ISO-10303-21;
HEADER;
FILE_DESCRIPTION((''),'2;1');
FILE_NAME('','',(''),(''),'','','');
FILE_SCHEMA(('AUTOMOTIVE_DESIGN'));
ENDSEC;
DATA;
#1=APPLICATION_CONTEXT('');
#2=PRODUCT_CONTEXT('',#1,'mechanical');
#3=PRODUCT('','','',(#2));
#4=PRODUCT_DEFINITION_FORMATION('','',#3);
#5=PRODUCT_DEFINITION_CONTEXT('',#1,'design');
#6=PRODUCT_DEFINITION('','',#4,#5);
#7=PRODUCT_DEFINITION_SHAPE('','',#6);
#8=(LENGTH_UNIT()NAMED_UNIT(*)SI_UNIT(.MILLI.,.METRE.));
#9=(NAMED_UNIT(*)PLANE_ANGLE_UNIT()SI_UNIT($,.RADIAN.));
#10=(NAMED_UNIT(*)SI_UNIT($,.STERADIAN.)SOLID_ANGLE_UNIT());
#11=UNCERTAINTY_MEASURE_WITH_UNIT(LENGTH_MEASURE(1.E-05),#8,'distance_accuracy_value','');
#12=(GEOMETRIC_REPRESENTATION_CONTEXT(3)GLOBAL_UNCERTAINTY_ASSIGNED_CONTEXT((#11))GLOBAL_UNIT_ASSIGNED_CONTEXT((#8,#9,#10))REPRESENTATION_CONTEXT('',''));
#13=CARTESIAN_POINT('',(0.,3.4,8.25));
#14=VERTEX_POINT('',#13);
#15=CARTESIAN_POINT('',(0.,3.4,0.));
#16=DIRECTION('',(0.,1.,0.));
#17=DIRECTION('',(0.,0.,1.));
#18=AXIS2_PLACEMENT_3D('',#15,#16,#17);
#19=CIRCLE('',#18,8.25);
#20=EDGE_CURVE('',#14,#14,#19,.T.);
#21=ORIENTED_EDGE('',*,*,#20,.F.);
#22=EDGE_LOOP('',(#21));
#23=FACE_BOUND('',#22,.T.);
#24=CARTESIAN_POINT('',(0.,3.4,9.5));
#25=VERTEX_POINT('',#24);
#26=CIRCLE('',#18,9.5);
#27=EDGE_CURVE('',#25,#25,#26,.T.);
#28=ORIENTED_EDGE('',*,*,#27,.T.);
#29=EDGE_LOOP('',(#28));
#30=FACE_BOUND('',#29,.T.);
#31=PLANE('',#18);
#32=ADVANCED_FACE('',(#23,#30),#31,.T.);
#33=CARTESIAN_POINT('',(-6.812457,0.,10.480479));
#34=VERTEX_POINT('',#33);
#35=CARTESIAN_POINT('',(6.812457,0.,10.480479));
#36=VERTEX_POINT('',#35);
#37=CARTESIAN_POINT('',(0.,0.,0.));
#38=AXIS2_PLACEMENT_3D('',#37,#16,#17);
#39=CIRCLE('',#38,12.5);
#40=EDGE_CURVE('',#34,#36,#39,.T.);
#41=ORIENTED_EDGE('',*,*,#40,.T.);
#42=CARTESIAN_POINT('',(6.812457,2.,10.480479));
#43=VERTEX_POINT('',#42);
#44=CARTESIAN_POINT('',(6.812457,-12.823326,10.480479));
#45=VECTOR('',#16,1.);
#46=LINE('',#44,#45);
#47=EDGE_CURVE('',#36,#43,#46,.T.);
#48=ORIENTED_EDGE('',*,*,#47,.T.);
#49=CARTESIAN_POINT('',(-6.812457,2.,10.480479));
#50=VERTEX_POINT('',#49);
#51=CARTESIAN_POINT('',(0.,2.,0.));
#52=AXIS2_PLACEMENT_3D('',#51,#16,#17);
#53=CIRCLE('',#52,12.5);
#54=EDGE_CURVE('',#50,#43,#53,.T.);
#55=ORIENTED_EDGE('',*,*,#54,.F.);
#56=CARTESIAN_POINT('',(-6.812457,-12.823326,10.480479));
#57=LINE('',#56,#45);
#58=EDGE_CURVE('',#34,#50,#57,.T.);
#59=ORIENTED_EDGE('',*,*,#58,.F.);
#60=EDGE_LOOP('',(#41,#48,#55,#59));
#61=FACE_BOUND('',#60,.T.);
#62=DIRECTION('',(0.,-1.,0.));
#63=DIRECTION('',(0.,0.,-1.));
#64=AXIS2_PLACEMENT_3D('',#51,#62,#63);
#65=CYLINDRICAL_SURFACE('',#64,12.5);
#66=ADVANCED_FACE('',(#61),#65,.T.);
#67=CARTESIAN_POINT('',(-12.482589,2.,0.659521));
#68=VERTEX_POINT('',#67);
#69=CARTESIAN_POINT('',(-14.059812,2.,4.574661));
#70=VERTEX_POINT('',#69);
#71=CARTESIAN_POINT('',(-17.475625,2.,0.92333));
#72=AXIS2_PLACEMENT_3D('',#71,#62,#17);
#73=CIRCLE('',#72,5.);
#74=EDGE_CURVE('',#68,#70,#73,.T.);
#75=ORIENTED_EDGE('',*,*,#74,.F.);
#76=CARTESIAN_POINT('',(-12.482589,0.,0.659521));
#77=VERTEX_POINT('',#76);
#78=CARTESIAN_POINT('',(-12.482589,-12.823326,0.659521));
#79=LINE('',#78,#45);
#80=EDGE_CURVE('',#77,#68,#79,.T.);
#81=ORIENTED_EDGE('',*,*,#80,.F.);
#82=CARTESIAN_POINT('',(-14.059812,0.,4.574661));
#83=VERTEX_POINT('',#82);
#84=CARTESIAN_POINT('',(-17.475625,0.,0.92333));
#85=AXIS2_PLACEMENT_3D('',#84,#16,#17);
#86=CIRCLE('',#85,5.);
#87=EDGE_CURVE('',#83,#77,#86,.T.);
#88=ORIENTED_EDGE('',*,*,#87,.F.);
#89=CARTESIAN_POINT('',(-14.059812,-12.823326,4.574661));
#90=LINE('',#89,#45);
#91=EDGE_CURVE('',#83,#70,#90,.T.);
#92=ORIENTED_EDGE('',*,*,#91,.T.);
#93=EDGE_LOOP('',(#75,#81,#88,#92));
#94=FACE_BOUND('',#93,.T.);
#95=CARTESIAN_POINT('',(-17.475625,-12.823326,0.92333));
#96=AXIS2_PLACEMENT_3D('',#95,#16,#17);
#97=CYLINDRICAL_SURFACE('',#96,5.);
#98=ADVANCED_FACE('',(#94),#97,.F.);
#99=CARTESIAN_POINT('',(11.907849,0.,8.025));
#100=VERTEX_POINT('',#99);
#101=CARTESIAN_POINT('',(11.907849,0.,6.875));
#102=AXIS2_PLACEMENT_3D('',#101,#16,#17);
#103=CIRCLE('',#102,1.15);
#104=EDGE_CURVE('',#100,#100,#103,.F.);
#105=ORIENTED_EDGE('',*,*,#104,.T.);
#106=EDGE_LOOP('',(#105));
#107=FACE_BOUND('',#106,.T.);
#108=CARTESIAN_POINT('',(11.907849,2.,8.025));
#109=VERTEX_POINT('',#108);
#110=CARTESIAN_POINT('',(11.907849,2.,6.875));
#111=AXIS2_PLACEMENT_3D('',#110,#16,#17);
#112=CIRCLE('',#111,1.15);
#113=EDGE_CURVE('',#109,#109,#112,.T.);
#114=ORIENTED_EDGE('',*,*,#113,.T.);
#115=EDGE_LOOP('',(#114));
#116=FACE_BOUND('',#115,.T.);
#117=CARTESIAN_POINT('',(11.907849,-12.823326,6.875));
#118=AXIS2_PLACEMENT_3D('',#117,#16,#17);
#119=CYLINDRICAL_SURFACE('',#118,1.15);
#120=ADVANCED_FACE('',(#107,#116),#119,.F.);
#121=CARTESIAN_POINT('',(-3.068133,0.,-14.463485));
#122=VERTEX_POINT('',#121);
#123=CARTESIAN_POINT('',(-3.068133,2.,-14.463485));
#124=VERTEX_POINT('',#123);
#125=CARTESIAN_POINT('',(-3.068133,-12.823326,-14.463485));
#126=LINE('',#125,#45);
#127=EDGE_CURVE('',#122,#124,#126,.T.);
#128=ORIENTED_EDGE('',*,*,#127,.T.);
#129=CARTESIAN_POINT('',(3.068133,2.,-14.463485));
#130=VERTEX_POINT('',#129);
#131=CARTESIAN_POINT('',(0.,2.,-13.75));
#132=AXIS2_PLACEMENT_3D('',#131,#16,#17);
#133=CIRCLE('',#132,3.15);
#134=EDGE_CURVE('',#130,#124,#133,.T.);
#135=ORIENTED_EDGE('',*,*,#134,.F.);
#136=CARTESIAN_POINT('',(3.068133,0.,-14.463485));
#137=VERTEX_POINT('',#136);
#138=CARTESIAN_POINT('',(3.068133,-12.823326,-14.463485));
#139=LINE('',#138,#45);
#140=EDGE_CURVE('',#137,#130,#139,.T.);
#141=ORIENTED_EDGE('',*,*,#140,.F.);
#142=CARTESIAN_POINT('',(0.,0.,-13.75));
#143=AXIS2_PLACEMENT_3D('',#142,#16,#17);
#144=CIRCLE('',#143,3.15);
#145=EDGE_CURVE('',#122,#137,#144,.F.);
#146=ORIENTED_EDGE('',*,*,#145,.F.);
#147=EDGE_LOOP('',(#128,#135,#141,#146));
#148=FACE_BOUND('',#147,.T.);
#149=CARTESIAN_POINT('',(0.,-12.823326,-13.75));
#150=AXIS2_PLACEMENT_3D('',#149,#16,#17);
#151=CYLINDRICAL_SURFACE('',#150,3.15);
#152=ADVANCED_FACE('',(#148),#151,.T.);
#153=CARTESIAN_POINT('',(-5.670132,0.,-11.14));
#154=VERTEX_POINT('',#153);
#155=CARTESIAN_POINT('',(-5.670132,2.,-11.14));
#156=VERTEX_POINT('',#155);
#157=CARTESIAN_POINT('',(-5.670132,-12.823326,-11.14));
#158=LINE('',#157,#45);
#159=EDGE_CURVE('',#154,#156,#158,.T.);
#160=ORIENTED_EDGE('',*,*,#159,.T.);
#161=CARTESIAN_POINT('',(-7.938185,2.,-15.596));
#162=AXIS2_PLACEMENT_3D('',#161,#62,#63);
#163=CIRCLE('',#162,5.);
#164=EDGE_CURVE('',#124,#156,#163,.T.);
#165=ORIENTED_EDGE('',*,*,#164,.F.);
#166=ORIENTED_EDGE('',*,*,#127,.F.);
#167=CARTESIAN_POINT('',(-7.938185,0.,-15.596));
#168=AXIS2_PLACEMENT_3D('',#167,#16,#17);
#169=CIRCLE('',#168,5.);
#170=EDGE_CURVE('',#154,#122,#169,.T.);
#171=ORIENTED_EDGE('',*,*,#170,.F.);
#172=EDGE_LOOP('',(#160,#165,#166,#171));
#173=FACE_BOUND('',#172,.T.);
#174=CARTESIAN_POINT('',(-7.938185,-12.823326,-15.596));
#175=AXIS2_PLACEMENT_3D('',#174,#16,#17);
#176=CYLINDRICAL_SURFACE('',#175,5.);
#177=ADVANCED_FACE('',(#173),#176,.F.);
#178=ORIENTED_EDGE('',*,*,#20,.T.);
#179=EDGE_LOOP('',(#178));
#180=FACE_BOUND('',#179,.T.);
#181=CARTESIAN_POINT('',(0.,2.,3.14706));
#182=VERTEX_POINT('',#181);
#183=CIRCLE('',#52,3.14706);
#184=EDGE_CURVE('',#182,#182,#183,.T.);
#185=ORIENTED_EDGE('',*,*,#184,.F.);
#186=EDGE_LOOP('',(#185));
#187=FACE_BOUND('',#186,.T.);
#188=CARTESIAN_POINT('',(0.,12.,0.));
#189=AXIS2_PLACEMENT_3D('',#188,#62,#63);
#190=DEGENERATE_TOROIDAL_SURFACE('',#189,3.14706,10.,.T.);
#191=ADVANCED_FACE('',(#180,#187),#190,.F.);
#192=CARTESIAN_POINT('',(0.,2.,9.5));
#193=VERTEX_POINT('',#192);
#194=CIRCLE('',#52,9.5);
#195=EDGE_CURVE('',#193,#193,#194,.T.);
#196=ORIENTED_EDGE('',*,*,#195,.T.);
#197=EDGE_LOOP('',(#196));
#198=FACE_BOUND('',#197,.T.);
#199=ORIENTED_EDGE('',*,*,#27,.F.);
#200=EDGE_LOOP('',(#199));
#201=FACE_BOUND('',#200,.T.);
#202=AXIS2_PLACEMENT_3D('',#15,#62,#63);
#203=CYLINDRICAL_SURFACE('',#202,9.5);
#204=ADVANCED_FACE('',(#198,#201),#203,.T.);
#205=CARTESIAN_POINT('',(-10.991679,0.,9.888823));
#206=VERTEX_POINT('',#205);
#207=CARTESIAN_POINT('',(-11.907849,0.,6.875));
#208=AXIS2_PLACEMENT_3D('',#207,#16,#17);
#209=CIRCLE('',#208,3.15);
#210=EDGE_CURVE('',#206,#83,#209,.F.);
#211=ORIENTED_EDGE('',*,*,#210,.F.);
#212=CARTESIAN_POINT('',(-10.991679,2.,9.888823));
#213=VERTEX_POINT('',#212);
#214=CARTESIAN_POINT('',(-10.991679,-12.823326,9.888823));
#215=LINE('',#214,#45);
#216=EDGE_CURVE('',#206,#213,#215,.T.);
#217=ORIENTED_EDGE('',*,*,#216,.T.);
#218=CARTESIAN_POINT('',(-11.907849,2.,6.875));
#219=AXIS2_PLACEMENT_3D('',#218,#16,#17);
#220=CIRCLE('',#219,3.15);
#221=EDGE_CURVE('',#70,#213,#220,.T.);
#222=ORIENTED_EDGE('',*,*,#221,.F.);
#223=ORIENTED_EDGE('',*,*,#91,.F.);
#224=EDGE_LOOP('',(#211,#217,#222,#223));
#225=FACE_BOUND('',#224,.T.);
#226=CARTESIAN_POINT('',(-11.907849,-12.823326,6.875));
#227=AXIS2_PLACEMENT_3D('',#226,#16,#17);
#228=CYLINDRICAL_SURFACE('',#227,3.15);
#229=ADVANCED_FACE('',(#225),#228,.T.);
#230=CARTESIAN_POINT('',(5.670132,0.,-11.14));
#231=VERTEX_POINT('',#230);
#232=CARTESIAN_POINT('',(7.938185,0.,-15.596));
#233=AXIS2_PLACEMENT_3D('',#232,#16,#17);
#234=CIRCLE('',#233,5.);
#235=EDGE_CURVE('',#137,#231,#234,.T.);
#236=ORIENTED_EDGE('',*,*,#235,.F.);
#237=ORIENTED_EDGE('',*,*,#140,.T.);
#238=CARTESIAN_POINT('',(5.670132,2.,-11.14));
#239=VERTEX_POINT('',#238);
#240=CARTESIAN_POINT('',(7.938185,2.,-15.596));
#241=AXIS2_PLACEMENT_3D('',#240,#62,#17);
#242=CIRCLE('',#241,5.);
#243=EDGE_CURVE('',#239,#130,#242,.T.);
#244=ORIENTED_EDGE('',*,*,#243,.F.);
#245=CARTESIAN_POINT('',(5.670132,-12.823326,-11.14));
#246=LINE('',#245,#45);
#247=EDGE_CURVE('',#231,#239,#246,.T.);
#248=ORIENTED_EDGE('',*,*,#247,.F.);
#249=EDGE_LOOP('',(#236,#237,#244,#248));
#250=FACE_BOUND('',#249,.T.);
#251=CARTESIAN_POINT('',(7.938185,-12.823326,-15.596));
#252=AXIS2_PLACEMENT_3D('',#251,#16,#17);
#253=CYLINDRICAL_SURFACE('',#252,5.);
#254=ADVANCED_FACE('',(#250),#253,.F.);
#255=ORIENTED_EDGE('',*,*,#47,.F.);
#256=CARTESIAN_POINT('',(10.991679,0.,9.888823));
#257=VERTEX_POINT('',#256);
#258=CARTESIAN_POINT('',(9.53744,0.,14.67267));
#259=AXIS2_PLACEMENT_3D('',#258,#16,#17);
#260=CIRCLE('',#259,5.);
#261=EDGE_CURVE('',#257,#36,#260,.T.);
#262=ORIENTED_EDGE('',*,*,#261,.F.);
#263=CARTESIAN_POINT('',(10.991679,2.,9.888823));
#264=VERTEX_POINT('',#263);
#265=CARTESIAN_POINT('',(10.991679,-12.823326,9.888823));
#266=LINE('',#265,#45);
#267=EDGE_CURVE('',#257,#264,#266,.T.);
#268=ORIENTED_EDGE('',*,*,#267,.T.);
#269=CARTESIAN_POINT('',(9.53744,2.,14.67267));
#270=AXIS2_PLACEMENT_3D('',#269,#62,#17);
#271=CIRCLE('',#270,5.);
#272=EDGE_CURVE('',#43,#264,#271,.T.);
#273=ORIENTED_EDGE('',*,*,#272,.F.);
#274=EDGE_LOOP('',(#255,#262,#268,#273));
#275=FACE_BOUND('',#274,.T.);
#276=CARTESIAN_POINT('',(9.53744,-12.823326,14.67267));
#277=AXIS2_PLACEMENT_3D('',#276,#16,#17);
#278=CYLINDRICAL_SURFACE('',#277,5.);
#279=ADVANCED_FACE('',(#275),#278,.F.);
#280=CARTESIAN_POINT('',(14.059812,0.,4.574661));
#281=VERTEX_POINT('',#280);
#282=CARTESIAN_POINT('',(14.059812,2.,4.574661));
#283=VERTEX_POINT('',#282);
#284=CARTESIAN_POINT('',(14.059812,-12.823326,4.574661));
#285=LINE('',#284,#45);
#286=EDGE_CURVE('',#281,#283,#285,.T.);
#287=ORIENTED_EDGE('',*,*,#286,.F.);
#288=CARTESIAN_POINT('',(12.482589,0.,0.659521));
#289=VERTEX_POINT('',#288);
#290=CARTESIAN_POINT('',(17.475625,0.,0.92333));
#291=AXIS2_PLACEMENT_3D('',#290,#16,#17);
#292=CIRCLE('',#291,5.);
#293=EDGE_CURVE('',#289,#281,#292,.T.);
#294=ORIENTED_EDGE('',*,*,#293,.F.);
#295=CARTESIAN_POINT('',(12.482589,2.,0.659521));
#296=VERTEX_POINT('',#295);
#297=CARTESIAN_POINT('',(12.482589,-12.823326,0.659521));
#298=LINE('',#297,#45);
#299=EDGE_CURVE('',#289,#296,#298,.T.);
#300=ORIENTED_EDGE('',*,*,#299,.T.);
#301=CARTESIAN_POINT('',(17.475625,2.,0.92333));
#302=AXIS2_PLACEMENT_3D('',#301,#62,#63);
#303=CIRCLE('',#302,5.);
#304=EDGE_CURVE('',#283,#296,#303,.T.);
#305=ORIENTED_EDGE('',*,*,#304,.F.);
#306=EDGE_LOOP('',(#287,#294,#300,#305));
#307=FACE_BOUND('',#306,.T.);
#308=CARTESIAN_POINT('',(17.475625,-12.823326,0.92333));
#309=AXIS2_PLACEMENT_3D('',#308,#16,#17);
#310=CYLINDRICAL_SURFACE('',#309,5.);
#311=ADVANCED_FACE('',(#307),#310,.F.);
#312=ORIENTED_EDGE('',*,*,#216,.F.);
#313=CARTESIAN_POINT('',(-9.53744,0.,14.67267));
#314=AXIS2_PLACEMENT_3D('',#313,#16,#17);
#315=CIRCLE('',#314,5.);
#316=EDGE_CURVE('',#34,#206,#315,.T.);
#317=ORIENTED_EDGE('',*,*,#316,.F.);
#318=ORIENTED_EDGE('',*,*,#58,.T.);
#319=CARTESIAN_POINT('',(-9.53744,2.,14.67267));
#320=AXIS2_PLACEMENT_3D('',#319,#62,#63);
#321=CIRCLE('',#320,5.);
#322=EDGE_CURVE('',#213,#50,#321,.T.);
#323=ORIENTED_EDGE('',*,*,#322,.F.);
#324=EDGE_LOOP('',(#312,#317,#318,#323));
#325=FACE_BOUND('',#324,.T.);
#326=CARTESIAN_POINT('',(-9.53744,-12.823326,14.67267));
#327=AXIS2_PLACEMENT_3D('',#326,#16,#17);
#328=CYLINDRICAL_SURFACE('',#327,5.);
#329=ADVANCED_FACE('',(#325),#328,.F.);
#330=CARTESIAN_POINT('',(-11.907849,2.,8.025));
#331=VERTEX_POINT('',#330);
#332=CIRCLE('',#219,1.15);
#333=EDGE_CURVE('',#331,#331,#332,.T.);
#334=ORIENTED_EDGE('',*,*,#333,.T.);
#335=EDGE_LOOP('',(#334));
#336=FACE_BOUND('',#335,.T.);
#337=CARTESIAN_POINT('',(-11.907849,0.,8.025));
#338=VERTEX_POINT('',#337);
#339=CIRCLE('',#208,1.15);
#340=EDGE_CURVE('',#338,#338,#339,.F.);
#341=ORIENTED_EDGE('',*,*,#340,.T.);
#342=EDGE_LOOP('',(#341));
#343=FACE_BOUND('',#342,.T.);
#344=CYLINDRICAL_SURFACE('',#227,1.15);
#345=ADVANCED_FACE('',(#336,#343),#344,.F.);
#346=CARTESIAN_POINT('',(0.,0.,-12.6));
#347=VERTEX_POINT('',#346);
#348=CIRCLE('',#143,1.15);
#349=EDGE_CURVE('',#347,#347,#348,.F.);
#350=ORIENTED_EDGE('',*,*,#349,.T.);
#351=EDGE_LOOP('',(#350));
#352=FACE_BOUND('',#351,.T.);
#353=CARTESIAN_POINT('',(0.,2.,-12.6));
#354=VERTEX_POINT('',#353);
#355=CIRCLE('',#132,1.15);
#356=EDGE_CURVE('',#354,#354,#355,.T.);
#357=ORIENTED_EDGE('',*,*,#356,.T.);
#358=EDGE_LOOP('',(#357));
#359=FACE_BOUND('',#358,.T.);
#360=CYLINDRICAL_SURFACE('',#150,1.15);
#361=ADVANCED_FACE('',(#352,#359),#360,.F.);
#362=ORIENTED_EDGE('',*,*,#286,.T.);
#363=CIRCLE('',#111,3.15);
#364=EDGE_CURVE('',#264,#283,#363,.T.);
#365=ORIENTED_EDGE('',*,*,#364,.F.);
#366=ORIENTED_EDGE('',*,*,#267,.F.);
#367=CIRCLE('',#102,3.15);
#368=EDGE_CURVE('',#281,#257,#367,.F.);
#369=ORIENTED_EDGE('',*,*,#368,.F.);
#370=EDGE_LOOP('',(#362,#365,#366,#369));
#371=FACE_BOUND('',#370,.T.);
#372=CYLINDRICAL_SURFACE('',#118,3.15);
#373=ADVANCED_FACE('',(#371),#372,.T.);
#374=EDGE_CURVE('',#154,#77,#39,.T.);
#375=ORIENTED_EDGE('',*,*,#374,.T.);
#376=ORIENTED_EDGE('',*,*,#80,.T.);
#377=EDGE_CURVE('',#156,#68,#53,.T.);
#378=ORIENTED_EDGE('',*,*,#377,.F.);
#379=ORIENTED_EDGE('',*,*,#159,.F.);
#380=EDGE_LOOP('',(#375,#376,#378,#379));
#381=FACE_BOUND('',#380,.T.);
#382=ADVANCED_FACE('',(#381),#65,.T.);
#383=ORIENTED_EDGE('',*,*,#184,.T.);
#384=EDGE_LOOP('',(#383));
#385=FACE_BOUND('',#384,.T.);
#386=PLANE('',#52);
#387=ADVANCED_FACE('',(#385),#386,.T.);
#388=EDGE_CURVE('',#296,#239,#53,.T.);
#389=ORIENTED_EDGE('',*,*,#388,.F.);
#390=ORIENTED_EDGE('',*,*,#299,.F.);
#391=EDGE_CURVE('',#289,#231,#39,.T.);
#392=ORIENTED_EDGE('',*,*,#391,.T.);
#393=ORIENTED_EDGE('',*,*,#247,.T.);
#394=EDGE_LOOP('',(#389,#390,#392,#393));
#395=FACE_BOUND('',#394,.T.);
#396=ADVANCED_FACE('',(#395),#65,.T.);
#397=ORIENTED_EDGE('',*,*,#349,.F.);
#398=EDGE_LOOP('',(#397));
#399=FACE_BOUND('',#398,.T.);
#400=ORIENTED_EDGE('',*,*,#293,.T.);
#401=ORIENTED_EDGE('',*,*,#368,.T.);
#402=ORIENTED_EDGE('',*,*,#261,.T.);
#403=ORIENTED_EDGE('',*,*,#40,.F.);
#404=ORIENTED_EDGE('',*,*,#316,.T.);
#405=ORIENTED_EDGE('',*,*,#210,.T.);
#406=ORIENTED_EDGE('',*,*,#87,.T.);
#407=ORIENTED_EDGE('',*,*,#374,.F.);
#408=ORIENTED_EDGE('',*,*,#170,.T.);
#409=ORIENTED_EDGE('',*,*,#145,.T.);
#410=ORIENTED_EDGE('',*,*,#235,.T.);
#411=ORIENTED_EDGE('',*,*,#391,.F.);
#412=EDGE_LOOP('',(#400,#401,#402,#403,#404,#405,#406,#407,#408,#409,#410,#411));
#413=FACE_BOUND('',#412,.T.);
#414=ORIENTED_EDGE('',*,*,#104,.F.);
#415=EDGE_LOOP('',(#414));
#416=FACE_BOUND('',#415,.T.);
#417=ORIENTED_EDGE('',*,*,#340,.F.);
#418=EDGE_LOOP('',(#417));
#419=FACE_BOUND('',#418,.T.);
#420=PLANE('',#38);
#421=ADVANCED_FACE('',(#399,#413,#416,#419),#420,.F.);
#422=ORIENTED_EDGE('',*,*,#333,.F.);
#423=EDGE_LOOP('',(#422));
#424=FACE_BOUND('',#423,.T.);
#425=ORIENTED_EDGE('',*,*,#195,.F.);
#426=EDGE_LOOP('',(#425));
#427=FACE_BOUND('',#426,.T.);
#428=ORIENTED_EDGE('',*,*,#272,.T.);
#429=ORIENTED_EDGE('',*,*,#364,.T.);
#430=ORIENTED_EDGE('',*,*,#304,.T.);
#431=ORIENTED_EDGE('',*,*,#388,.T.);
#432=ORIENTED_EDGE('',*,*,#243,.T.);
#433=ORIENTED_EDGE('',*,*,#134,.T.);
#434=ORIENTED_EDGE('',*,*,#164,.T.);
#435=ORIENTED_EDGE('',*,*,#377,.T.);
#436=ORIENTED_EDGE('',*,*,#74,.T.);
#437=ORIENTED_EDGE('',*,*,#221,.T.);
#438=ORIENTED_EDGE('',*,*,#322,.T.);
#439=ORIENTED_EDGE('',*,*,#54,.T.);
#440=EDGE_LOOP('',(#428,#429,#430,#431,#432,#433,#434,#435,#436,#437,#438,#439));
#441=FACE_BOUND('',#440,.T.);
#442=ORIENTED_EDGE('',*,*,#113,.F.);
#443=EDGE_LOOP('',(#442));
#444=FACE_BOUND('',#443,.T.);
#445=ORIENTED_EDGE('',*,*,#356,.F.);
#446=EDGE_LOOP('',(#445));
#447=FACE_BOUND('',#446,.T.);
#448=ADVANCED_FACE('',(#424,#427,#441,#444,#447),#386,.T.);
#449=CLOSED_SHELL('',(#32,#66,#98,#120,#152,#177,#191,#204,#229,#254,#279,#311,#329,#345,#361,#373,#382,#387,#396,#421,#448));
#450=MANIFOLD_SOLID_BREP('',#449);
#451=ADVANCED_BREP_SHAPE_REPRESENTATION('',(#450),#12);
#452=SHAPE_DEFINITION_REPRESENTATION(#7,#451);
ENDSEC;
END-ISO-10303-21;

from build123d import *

# Parameters (mm, degrees)
SKETCH_1_R      = 12.5
EXTRUDE_1_DEPTH = 2
SKETCH_2_R      = 9.5
SKETCH_2_R_2    = 8.25
EXTRUDE_2_DEPTH = 1.4
FILLET_1_R      = 10
EXTRUDE_START   = -2
SKETCH_3_R      = 1.15
EXTRUDE_3_DEPTH = 2


with BuildPart() as part:
    # Эскиз1 → Бобышка-Вытянуть1 (new body)
    with BuildSketch(Plane(origin=(0, 0, 0), x_dir=(1, 0, 0), z_dir=(0, 1, 0))):
        with Locations(Location((0, 0, 0), (0, 0, 270))):
            Circle(SKETCH_1_R)
    extrude(amount=EXTRUDE_1_DEPTH)

    # Эскиз2 → Бобышка-Вытянуть2 (add)
    with BuildSketch(Plane(origin=(0, 2, 0), x_dir=(1, 0, 0), z_dir=(0, 1, 0))):
        with Locations(Location((0, 0, 0), (0, 0, 270))):
            Circle(SKETCH_2_R)
        with Locations(Location((0, 0, 0), (0, 0, 270))):
            Circle(SKETCH_2_R_2, mode=Mode.SUBTRACT)
    extrude(amount=EXTRUDE_2_DEPTH)

    # Скругление1
    # the kernel refuses this fillet: 10 mm, written as the material it adds along each edge
    with BuildSketch(Plane(origin=(0, 2, 0), x_dir=(0, 0, 1), z_dir=(-1, 0, 0))) as fillet_1_piece_1:
        with BuildLine():
            CenterArc((3.147059671, 10), FILLET_1_R, 270, 30.683417109)
            Line((3.147059671, 0), (3.147059671, -0.2))
            Line((3.147059671, -0.2), (8.25, -0.2))
            Line((8.25, -0.2), (8.45, 0))
            ThreePointArc((8.45, 0), (8.45, 0.7), (8.352058807, 1.228))
            Line((8.352058807, 1.228), (8.25, 1.4))
        make_face()
    revolve(axis=Axis((0, 2, 0), (0, 1, 0)))

    # Эскиз3 → Бобышка-Вытянуть3 (add)
    # profile 1 of 3: a face of its own
    with BuildSketch(Plane(origin=(0, 2, 0), x_dir=(1, 0, 0), z_dir=(0, 1, 0)).offset(EXTRUDE_START)):
        with BuildLine():
            ThreePointArc((5.670132274, 11.14), (0, 12.5), (-5.670132274, 11.14))
            ThreePointArc((-5.670132274, 11.14), (-4.001241708, 12.51371577), (-3.068132924, 14.463484663))
            ThreePointArc((-3.068132924, 14.463484663), (0, 16.9), (3.068132924, 14.463484663))
            ThreePointArc((3.068132924, 14.463484663), (4.001241708, 12.51371577), (5.670132274, 11.14))
        make_face()
        with Locations(Location((0, 13.75, 0), (0, 0, 270))):
            Circle(SKETCH_3_R, mode=Mode.SUBTRACT)
    # profile 2 of 3: a face of its own
    with BuildSketch(Plane(origin=(0, 2, 0), x_dir=(1, 0, 0), z_dir=(0, 1, 0)).offset(EXTRUDE_START)):
        with BuildLine():
            ThreePointArc((10.991678683, -9.888823385), (14.635829324, -8.45), (14.059811607, -4.574661277))
            ThreePointArc((14.059811607, -4.574661277), (12.837816607, -2.791680919), (12.482589135, -0.659521408))
            ThreePointArc((12.482589135, -0.659521408), (10.825317547, -6.25), (6.812456861, -10.480478592))
            ThreePointArc((6.812456861, -10.480478592), (8.836574899, -9.722034851), (10.991678683, -9.888823385))
        make_face()
        with Locations(Location((11.907849302, -6.875, 0), (0, 0, 270))):
            Circle(SKETCH_3_R, mode=Mode.SUBTRACT)
    # profile 3 of 3: a face of its own
    with BuildSketch(Plane(origin=(0, 2, 0), x_dir=(1, 0, 0), z_dir=(0, 1, 0)).offset(EXTRUDE_START)):
        with BuildLine():
            ThreePointArc((-14.059811607, -4.574661277), (-14.635829324, -8.45), (-10.991678683, -9.888823385))
            ThreePointArc((-10.991678683, -9.888823385), (-8.836574899, -9.722034851), (-6.812456861, -10.480478592))
            ThreePointArc((-6.812456861, -10.480478592), (-10.825317547, -6.25), (-12.482589135, -0.659521408))
            ThreePointArc((-12.482589135, -0.659521408), (-12.837816607, -2.791680919), (-14.059811607, -4.574661277))
        make_face()
        with Locations(Location((-11.907849302, -6.875, 0), (0, 0, 270))):
            Circle(SKETCH_3_R, mode=Mode.SUBTRACT)
    extrude(amount=EXTRUDE_3_DEPTH)


solid = part.part
